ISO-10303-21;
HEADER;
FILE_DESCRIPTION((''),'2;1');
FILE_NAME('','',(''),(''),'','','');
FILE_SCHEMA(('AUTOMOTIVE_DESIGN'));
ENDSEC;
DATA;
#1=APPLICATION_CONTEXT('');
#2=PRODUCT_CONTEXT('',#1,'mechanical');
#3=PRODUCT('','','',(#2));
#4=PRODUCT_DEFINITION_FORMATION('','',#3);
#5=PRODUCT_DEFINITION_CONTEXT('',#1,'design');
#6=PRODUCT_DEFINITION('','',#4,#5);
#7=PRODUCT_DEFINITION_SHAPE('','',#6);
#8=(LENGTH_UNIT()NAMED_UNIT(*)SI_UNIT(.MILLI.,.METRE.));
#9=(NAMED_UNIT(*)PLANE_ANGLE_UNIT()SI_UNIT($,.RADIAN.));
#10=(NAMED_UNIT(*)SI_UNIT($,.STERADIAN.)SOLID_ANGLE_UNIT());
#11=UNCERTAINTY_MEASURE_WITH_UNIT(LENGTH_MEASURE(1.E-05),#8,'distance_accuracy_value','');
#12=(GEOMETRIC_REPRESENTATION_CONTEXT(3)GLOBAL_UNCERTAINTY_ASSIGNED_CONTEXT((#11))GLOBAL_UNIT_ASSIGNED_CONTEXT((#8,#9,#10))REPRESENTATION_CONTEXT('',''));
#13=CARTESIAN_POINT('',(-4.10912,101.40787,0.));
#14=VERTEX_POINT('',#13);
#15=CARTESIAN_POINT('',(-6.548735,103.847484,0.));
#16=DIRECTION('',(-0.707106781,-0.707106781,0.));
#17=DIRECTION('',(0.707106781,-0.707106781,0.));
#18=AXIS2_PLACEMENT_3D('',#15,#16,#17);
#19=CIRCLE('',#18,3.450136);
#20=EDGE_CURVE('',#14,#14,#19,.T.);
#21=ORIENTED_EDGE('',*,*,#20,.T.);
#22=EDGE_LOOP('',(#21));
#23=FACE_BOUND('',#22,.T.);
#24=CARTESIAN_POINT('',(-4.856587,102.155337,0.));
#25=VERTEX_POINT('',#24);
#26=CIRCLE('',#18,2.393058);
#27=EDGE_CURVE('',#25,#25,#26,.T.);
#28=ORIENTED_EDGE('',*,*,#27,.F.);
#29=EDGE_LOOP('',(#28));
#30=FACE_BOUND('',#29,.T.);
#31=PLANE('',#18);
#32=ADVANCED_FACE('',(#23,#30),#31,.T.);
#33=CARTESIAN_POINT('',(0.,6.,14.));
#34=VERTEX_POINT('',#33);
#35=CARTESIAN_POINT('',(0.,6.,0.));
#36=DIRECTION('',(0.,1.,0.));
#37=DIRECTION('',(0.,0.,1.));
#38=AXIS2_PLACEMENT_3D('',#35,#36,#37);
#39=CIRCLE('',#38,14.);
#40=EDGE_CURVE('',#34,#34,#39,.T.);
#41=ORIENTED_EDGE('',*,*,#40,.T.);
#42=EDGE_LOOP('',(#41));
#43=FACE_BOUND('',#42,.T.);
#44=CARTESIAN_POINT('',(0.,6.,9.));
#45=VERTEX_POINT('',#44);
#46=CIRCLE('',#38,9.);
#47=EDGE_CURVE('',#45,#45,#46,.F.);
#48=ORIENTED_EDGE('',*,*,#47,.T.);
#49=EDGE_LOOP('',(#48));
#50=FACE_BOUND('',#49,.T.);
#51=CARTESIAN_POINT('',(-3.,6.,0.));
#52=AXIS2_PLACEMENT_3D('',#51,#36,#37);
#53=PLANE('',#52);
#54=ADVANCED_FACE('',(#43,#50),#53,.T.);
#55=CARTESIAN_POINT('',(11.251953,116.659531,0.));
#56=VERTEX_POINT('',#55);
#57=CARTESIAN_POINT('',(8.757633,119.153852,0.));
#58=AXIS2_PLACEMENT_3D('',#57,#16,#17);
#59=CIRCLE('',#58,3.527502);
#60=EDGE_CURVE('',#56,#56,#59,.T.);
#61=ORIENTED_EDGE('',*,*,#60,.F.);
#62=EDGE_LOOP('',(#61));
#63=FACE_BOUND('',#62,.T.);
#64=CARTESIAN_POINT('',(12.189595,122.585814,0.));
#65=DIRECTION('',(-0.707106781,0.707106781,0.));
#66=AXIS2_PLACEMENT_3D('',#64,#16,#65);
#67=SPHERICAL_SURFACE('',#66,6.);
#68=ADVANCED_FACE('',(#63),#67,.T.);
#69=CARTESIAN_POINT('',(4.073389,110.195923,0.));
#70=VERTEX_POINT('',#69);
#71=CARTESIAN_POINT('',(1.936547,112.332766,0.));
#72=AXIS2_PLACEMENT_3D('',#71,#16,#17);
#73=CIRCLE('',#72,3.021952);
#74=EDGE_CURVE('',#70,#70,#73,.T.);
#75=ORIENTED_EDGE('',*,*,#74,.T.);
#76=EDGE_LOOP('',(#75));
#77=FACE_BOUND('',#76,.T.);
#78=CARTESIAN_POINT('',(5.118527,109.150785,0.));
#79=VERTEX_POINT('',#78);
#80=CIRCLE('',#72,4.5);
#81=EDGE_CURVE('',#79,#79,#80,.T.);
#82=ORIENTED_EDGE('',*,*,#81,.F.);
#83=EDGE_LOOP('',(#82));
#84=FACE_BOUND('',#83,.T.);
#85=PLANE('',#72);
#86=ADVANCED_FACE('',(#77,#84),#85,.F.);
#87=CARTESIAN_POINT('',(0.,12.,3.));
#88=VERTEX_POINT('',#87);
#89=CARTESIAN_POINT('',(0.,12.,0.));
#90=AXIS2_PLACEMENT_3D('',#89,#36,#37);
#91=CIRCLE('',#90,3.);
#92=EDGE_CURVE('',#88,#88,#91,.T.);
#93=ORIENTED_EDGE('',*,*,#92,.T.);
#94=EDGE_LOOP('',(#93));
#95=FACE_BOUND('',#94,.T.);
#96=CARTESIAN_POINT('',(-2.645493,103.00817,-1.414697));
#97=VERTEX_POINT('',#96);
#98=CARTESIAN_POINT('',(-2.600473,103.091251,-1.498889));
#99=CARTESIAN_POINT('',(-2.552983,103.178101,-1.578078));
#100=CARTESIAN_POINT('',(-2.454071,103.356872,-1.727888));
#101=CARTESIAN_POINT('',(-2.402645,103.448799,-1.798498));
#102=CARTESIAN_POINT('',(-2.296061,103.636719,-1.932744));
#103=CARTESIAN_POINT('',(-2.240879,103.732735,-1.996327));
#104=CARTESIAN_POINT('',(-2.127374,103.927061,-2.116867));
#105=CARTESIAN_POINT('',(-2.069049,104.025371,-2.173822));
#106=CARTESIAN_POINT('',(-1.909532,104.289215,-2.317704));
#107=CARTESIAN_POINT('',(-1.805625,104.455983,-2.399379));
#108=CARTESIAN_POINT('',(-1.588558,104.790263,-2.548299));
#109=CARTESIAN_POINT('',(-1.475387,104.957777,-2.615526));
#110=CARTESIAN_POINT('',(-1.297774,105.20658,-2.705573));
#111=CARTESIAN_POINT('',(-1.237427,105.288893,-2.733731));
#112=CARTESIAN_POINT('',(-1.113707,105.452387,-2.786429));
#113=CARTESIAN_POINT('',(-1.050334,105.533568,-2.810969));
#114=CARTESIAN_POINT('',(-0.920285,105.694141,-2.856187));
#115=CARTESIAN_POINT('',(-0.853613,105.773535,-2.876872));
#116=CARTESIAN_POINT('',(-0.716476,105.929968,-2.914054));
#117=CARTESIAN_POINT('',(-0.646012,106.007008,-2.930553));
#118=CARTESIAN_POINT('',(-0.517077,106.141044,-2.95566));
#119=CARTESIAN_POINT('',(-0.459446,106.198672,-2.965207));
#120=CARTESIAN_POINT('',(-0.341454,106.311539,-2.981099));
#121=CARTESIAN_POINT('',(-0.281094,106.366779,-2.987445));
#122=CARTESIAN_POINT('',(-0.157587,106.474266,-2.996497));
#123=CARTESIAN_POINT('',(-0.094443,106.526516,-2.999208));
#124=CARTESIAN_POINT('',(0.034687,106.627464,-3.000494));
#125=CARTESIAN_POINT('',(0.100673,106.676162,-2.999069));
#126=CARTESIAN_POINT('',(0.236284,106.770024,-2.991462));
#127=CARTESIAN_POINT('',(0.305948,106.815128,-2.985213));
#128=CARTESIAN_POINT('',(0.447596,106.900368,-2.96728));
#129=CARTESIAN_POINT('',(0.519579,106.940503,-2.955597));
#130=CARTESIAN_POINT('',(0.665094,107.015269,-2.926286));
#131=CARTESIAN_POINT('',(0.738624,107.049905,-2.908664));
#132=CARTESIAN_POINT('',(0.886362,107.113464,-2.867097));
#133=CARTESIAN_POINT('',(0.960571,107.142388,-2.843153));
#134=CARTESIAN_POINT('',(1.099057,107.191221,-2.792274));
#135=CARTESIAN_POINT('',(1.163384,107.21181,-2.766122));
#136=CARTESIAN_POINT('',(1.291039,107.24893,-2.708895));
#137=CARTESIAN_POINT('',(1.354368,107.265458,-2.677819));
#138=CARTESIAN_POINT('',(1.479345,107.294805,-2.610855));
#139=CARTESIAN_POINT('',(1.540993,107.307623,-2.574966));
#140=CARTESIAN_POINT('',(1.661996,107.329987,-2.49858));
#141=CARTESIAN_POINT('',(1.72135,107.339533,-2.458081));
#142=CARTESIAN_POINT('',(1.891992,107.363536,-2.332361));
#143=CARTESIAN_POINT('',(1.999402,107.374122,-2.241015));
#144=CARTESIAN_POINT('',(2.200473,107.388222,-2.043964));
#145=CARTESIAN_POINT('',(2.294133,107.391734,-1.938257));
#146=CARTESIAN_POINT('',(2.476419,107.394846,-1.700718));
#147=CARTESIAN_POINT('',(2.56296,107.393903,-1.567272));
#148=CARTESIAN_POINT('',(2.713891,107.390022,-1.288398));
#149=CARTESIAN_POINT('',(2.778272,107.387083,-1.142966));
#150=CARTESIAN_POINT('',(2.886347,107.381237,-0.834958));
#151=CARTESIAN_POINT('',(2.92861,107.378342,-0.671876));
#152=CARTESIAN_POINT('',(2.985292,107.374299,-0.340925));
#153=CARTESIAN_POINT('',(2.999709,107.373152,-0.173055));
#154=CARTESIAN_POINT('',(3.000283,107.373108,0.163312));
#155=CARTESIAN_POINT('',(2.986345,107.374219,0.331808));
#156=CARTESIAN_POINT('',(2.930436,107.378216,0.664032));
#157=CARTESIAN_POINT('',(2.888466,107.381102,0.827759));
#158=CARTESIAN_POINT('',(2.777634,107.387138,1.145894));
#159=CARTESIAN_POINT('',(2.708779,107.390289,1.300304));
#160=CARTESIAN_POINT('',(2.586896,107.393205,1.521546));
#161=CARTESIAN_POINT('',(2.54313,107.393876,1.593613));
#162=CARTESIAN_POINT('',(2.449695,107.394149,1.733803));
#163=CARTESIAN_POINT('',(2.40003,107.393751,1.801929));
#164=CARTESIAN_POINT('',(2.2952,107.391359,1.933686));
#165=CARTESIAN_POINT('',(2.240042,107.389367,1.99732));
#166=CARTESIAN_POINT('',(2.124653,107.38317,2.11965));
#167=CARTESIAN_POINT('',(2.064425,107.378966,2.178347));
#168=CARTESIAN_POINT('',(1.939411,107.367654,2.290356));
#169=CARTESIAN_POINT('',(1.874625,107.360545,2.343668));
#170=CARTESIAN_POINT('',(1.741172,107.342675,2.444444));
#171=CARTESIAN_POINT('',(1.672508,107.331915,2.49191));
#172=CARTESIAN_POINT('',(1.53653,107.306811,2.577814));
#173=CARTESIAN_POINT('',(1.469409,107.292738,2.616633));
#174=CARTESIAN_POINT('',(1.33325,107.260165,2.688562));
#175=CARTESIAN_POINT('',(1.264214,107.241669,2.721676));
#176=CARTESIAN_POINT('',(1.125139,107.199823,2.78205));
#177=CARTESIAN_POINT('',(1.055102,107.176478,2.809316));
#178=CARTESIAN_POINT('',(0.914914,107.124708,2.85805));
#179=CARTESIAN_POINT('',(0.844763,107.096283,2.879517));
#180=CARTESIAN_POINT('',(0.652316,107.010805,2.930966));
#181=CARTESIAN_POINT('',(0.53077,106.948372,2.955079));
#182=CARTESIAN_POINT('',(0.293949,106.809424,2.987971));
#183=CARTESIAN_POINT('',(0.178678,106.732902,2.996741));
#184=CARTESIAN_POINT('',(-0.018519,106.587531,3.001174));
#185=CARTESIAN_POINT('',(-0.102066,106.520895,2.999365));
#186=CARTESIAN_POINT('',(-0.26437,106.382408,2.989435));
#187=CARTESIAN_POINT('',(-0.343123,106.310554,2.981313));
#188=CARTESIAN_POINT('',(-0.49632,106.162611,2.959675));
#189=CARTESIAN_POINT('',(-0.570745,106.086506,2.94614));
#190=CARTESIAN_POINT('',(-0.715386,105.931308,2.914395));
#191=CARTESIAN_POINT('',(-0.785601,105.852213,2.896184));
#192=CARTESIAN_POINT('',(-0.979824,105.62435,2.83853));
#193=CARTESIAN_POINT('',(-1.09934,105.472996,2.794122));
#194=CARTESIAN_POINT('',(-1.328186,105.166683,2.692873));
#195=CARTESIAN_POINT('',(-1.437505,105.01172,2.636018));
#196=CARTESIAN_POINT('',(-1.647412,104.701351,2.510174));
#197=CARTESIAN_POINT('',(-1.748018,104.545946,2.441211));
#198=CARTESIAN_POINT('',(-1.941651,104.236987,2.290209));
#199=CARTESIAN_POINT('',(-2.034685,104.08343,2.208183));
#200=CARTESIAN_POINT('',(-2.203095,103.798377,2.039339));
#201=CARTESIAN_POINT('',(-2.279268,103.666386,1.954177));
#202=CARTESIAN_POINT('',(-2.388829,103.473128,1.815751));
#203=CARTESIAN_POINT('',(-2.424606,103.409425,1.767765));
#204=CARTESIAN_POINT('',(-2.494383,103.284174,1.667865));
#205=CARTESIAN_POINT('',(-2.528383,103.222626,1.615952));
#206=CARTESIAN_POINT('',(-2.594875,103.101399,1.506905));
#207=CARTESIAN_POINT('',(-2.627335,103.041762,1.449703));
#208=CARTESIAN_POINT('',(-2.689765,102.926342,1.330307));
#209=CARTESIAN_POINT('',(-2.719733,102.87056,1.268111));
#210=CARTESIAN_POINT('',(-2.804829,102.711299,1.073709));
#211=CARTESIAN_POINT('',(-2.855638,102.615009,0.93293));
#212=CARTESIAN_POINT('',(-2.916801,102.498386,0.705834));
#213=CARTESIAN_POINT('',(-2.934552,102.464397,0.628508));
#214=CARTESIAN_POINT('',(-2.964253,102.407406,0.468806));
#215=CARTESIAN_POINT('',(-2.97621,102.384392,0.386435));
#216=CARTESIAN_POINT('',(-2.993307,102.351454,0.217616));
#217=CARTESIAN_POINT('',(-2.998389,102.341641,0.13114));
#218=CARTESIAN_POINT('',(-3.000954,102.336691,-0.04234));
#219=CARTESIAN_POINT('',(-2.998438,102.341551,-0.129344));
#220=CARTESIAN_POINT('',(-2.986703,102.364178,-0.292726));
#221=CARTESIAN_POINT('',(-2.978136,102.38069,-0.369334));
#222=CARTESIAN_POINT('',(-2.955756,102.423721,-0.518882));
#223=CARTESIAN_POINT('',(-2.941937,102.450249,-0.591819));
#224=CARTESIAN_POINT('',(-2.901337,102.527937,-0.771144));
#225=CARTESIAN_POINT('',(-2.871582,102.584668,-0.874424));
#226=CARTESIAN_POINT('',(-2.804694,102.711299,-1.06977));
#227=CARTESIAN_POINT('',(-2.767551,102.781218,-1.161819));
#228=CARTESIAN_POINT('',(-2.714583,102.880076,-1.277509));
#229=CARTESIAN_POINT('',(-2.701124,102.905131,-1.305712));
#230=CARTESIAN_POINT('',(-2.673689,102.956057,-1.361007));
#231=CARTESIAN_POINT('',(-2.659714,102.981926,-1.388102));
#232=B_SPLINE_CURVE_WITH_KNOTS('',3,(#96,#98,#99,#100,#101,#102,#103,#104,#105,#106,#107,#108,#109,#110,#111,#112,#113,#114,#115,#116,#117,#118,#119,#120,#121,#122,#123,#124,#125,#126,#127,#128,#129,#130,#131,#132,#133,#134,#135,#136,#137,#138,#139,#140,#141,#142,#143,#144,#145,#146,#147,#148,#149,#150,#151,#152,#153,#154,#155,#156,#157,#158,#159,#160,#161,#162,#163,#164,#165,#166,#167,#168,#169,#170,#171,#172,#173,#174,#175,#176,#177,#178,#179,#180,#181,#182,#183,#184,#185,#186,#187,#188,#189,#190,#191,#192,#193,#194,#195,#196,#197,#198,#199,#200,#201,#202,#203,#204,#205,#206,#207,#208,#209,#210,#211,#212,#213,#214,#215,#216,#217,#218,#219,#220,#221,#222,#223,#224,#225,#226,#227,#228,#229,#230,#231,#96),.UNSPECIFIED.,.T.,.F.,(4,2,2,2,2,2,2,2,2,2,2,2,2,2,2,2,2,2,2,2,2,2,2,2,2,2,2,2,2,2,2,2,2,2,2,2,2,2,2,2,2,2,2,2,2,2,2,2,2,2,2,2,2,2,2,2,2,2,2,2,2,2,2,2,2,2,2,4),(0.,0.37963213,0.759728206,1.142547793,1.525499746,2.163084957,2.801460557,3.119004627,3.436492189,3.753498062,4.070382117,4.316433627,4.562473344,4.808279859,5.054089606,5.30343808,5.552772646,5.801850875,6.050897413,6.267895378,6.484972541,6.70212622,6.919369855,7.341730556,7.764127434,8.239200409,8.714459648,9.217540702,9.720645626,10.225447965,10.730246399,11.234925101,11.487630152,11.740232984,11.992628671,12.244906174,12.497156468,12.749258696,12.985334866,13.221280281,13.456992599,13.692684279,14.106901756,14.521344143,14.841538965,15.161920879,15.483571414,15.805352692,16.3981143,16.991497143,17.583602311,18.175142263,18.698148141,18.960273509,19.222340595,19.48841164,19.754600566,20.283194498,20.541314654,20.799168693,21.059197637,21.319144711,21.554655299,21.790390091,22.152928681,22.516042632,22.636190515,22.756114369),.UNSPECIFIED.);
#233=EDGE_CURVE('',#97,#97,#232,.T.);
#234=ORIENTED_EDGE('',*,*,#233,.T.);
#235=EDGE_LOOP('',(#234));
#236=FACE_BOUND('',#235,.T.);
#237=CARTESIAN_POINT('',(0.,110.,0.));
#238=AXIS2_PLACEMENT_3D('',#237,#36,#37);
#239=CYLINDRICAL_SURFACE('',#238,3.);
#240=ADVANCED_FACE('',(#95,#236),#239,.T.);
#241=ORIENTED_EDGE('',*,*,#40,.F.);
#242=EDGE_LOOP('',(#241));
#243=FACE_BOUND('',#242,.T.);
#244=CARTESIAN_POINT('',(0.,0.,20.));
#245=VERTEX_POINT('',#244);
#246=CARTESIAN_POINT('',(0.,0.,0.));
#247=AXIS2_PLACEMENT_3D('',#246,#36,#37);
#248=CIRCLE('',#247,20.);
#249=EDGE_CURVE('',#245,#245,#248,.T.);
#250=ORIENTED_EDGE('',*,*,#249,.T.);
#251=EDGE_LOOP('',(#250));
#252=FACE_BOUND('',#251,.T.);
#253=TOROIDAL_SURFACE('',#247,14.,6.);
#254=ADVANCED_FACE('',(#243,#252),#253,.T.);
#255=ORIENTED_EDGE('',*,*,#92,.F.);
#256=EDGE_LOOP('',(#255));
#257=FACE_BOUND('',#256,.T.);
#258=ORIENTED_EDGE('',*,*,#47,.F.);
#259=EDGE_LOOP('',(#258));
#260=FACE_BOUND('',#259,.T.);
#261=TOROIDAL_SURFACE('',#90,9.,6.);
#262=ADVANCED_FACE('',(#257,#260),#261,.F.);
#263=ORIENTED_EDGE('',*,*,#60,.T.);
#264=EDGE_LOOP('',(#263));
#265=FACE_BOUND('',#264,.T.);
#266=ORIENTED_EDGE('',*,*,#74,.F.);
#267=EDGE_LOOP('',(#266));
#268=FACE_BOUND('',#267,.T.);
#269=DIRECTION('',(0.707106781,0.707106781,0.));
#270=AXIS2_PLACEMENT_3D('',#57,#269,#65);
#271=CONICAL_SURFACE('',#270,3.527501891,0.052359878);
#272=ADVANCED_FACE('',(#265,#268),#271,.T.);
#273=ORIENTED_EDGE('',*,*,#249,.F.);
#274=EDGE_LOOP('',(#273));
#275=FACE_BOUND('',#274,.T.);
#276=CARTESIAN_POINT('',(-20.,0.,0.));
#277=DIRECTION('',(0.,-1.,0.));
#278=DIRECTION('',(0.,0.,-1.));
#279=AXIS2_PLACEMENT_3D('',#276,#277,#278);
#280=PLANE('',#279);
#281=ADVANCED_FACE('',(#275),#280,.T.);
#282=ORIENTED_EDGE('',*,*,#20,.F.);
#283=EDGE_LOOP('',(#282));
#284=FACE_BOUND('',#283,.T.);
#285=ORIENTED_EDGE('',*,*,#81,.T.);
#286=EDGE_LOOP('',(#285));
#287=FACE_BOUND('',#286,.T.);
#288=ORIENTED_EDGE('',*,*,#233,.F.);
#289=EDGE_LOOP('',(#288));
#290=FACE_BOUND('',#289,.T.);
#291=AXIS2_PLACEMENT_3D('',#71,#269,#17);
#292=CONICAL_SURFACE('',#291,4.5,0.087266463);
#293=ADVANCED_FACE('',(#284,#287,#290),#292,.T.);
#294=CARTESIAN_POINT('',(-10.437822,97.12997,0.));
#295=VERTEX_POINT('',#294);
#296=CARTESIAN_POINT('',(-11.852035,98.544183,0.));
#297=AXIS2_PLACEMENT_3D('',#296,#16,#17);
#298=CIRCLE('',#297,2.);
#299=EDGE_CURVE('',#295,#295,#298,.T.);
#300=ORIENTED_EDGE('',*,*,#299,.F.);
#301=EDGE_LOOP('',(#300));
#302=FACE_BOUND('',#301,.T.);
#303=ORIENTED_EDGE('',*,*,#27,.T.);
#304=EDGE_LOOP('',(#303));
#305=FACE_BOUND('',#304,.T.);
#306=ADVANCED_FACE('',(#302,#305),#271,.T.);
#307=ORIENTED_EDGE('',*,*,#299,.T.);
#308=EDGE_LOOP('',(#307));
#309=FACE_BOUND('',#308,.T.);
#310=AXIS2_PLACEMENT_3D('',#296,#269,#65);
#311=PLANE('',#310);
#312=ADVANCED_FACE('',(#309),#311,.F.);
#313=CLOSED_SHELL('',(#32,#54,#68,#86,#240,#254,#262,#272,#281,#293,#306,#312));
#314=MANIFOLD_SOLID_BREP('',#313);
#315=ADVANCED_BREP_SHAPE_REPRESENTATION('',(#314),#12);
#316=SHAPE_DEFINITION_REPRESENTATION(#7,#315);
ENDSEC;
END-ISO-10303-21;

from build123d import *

# Parameters (mm, degrees)
FILLET1_R           = 6
BOSS_EXTRUDE1_START = -19.5
SKETCH3_R           = 4.5
BOSS_EXTRUDE1_DEPTH = 12
BOSS_EXTRUDE1_TAPER = 5
FILLET2_R           = 6


with BuildPart() as part:
    # Sketch1 → Revolve1 (revolve)
    with BuildSketch(Plane.XY, mode=Mode.PRIVATE) as revolve1_sk:
        Polygon((0, 110), (-3, 110), (-3, 6), (-20, 6), (-20, 0), (0, 0), align=None)
    revolve(revolve1_sk.sketch.rotate(Axis((0, 110, 0), (0, -1, 0)), 270), axis=Axis((0, 110, 0), (0, -1, 0)))

    # Fillet1
    fillet1_edges = [part.edges().sort_by_distance(p)[0] for p in [
        (0, 6, -3),
    ]]
    fillet(fillet1_edges, radius=FILLET1_R)

    # Sketch2 → Revolve2 (revolve)
    with BuildSketch(Plane.XY, mode=Mode.PRIVATE) as revolve2_sk:
        with BuildLine():
            Line((-11.852035479, 98.544183465), (-13.266249042, 99.958397027))
            Line((-13.266249042, 99.958397027), (6.263312277, 121.648172237))
            ThreePointArc((6.263312277, 121.648172237), (9.466087356, 127.932074931), (16.432235768, 126.828454712))
            Line((16.432235768, 126.828454712), (-11.852035479, 98.544183465))
        make_face()
    revolve(revolve2_sk.sketch.rotate(Axis((-11.852035479, 98.544183465, 0), (0.7071067811865513, 0.7071067811865438, 0)), 180), axis=Axis((-11.852035479, 98.544183465, 0), (0.7071067811865513, 0.7071067811865438, 0)))

    # Sketch3 → Boss-Extrude1 (add)
    with BuildSketch(Plane(origin=(43.346073993, 43.346073993, 0), x_dir=(0, 0, 1), z_dir=(-0.7071067811865513, -0.7071067811865437, 0)).offset(BOSS_EXTRUDE1_START)):
        with Locations((0, 78.061915033)):
            Circle(SKETCH3_R)
    extrude(amount=BOSS_EXTRUDE1_DEPTH, taper=BOSS_EXTRUDE1_TAPER)

    # Fillet2
    fillet2_edges = [part.edges().sort_by_distance(p)[0] for p in [
        (0, 6, -20),
    ]]
    fillet(fillet2_edges, radius=FILLET2_R - 0.0001)  # a hair under: the kernel refuses the full size


solid = part.part
